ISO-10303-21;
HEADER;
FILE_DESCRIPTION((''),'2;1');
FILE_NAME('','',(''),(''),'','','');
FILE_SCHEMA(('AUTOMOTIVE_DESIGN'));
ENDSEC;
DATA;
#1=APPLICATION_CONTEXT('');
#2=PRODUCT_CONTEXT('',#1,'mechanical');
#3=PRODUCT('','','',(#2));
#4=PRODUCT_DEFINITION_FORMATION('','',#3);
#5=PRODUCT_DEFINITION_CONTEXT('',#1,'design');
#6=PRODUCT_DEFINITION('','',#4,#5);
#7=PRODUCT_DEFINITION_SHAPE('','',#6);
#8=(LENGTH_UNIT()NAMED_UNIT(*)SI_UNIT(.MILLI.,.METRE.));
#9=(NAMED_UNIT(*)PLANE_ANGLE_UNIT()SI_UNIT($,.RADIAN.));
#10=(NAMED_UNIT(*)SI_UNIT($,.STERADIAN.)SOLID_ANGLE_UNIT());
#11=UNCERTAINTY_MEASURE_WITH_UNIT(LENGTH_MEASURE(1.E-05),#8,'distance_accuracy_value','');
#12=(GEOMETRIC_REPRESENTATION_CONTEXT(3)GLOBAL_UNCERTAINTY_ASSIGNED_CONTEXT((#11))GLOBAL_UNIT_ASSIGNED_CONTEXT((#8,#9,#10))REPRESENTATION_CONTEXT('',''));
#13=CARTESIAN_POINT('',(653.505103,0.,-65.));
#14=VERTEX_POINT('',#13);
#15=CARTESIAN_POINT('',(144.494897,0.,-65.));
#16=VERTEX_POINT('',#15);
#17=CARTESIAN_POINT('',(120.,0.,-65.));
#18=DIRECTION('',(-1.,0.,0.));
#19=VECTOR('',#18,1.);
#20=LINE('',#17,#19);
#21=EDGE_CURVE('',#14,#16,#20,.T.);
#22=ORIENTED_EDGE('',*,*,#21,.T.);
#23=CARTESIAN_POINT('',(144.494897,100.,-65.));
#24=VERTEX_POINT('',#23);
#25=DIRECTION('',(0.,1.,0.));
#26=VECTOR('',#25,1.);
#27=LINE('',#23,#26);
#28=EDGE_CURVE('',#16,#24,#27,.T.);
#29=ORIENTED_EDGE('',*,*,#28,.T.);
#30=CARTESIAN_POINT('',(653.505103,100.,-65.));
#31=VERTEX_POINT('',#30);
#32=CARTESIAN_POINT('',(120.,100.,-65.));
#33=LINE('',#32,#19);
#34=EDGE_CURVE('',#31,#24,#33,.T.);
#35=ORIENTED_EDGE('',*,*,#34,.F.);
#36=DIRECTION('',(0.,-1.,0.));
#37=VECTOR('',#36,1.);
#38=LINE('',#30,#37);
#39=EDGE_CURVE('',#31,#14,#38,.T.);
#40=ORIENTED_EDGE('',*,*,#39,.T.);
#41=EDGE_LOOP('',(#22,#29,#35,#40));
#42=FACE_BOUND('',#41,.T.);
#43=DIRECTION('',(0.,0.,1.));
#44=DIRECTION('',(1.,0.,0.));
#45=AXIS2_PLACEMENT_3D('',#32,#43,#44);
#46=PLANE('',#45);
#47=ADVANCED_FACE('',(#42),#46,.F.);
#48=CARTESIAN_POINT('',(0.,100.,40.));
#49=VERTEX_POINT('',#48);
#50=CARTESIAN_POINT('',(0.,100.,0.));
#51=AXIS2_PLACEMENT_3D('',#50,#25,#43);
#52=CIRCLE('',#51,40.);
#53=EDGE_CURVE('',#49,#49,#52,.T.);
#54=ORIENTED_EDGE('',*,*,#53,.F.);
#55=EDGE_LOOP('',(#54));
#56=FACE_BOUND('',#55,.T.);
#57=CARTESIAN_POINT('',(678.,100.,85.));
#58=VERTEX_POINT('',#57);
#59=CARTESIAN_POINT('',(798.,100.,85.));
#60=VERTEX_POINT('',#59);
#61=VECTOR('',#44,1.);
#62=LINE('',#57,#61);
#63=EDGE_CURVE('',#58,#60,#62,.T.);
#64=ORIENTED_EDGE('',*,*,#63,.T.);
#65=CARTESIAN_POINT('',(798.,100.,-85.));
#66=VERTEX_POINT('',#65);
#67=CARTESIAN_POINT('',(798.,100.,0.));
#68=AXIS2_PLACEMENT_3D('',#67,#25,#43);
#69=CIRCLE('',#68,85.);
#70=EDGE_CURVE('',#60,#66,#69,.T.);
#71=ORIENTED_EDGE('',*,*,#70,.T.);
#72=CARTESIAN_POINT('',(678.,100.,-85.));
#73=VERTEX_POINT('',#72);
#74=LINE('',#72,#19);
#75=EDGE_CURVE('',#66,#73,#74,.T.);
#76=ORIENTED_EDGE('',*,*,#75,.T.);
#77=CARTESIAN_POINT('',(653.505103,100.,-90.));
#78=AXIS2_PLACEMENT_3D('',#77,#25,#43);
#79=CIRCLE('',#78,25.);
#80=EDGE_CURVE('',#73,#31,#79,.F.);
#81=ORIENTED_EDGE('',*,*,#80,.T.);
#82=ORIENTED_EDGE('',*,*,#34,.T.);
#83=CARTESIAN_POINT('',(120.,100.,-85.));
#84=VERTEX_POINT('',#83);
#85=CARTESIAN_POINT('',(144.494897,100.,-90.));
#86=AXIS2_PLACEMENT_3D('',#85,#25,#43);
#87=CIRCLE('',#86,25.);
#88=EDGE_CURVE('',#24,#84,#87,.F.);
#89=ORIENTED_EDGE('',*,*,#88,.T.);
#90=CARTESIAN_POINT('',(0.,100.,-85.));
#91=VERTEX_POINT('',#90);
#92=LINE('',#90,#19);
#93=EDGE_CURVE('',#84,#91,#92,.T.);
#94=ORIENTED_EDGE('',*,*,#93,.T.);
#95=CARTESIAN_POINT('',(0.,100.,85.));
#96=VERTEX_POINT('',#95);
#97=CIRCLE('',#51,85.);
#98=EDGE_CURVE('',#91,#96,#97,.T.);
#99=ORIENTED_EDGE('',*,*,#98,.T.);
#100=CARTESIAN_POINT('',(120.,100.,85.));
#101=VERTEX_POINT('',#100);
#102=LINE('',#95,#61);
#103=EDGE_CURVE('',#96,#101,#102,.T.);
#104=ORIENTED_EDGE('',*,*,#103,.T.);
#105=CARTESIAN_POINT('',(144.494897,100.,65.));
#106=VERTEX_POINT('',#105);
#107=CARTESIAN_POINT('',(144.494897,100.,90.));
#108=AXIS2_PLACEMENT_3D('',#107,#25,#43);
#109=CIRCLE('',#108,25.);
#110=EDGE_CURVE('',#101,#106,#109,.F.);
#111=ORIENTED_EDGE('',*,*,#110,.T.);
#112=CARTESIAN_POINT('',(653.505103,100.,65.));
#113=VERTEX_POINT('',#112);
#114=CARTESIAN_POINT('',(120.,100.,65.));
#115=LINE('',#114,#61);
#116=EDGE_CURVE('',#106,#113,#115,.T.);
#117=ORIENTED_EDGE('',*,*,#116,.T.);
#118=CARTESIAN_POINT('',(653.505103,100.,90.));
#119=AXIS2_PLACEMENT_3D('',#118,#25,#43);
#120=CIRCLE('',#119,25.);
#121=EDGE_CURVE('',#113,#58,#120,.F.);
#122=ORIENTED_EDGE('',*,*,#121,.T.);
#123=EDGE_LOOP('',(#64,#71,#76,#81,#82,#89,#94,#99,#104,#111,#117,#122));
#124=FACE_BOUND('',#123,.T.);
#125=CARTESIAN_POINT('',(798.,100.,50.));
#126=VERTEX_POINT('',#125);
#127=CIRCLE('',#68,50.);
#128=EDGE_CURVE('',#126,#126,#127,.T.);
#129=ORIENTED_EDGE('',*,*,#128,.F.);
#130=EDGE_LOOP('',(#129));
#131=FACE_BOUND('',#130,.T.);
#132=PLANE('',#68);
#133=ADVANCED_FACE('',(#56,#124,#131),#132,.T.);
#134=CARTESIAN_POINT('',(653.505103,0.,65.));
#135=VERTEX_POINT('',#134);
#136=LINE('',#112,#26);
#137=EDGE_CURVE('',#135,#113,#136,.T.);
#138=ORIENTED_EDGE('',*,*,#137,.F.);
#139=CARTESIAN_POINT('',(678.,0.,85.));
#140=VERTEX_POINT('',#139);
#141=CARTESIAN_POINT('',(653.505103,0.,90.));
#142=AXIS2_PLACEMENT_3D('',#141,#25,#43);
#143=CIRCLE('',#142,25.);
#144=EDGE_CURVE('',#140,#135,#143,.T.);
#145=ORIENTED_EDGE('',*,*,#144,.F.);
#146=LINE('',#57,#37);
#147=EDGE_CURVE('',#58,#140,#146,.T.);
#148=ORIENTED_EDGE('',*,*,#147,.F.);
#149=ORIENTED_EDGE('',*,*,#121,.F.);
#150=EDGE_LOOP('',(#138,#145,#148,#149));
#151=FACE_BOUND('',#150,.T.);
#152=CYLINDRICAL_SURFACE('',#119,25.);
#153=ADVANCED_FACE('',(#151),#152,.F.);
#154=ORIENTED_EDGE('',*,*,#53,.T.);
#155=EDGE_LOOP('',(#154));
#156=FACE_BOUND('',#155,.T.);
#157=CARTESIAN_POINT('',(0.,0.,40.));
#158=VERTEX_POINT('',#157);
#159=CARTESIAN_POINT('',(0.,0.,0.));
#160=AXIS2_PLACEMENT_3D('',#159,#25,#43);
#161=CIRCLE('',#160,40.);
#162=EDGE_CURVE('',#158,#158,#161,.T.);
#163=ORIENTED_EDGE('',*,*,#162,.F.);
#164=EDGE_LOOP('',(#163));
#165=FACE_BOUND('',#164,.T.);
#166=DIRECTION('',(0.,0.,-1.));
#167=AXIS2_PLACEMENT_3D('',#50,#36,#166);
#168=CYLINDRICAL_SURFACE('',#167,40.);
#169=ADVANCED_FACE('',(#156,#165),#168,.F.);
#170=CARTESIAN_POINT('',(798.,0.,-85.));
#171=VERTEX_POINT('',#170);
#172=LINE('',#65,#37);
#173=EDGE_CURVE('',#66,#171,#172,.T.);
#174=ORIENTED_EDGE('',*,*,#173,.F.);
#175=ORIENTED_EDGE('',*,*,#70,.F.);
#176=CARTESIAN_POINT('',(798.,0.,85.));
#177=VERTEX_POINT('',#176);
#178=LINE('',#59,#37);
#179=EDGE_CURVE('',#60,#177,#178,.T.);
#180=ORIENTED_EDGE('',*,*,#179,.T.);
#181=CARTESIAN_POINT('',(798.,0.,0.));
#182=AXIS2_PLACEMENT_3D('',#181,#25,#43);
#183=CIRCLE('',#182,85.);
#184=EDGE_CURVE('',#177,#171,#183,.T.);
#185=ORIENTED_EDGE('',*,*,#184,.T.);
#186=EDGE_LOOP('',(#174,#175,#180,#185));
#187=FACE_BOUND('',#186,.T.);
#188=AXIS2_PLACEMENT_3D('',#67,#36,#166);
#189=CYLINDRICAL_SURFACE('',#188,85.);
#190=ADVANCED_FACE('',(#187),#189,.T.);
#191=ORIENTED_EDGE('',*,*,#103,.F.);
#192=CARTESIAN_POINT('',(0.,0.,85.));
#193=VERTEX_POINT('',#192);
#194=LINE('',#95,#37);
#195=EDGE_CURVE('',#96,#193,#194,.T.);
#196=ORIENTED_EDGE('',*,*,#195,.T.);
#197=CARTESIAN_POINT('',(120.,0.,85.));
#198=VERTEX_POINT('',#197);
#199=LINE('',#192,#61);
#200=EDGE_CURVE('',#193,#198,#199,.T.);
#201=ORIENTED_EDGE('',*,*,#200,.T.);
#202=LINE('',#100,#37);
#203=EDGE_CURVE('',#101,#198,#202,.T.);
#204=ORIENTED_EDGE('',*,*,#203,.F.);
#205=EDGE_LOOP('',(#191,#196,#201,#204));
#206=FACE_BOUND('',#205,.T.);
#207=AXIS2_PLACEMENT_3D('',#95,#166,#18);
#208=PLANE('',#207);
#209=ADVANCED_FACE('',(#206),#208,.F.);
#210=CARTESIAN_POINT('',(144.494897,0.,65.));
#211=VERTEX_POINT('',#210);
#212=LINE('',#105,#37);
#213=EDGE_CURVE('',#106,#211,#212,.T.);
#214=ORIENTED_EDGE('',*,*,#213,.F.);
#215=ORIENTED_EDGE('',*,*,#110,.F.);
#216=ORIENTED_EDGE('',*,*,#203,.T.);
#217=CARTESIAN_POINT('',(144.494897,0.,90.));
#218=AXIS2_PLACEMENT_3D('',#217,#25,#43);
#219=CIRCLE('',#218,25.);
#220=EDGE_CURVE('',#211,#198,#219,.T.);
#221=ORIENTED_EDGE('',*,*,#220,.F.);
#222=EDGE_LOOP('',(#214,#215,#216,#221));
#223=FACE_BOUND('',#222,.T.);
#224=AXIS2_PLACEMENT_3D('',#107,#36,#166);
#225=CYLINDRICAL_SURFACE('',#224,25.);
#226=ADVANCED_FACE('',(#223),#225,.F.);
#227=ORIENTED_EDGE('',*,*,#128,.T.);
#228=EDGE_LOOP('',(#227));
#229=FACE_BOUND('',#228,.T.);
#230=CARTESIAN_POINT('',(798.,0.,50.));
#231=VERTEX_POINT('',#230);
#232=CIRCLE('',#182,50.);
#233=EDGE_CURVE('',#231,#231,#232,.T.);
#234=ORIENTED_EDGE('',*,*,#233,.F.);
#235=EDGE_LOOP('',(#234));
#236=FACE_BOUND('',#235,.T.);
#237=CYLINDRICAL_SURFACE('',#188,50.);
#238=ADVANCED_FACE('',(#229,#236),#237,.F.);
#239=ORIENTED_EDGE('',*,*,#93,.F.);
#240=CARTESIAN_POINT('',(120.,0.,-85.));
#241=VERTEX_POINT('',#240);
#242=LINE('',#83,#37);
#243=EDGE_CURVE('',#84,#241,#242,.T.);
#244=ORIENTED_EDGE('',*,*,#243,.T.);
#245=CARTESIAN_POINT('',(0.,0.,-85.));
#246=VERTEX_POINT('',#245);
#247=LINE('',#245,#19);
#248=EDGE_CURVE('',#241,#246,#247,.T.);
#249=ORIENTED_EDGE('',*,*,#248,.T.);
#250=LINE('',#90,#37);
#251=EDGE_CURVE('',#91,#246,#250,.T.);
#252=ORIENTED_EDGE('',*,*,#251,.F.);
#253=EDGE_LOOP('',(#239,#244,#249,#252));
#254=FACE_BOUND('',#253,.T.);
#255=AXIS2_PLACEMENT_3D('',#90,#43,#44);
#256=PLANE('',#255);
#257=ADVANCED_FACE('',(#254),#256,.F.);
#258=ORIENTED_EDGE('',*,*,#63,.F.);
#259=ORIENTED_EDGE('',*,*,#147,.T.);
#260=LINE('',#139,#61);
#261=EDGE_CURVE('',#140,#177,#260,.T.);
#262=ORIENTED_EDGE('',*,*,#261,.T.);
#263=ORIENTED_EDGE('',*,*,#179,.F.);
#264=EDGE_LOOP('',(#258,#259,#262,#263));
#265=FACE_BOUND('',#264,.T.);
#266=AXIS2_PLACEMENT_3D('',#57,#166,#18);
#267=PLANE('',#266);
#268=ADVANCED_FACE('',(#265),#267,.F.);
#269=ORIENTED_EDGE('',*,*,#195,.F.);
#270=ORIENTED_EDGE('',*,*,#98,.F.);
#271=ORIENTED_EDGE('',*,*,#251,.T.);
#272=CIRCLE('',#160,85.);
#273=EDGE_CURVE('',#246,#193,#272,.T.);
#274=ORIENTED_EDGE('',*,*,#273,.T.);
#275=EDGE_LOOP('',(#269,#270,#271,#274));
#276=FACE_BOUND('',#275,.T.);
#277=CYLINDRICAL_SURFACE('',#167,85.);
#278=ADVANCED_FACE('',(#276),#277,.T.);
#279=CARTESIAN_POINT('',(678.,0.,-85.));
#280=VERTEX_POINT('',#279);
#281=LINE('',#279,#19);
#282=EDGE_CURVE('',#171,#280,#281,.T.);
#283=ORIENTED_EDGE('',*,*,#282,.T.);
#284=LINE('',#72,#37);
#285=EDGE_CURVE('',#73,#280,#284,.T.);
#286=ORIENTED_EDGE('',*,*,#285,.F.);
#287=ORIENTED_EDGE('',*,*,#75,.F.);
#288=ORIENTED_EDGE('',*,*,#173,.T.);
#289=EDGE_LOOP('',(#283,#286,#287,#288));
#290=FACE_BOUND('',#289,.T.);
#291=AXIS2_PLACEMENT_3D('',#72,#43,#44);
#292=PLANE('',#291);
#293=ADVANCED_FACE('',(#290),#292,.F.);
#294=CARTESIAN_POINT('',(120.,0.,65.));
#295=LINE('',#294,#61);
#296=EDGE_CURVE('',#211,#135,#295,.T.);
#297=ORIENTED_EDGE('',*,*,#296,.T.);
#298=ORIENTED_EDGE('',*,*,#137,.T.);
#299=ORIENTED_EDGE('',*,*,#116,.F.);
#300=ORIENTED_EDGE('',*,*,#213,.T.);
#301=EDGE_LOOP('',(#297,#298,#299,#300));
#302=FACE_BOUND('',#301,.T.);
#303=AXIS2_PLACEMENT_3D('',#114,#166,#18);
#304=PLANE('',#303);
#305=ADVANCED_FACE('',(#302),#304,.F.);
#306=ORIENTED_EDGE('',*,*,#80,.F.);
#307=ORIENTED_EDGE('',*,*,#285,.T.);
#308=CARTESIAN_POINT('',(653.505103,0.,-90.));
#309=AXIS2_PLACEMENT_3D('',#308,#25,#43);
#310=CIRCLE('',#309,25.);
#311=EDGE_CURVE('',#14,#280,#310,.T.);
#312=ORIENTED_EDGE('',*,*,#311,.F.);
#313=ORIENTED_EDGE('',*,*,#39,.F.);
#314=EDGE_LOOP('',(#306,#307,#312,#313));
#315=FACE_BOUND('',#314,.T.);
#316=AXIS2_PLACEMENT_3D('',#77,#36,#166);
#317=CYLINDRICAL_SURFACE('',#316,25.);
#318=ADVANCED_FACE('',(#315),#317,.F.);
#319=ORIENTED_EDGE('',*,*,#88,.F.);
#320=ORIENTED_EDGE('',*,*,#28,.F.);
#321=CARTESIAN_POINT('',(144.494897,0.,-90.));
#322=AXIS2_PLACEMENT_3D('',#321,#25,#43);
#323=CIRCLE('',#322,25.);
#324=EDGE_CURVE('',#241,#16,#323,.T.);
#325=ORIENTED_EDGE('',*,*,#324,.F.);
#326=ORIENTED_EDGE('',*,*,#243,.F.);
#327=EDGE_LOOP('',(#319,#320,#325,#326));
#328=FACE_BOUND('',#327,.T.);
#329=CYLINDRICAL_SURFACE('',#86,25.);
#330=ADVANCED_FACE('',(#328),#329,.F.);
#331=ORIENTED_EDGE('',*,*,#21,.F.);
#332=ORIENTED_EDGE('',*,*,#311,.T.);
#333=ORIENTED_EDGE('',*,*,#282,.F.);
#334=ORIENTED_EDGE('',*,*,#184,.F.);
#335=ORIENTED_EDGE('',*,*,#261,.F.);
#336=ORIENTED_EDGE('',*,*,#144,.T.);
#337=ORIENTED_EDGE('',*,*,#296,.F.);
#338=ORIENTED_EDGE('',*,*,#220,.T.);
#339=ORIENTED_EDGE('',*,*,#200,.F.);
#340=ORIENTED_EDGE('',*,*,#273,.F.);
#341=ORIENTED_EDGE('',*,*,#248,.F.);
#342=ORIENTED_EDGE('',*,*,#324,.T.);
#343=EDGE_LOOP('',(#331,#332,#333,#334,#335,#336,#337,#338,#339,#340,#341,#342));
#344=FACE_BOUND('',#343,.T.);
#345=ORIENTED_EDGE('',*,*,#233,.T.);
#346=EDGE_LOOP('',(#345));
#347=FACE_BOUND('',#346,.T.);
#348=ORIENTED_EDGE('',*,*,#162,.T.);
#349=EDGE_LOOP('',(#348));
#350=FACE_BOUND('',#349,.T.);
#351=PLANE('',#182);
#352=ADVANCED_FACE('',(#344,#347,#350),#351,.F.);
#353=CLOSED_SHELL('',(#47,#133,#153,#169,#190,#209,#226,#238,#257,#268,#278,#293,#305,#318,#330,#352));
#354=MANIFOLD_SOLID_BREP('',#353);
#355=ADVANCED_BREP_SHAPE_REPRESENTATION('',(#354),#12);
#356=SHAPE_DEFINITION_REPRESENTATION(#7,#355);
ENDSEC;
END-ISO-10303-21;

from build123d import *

# Parameters (mm, degrees)
SKETCH1_R           = 50
SKETCH1_R_2         = 40
BOSS_EXTRUDE1_DEPTH = 100
FILLET1_R           = 25


with BuildPart() as part:
    # Sketch1 → Boss-Extrude1 (new body)
    with BuildSketch(Plane(origin=(0, 0, 0), x_dir=(1, 0, 0), z_dir=(0, 1, 0))):
        with BuildLine():
            Line((120, 85), (120, 65))
            Line((120, 65), (678, 65))
            Line((678, 65), (678, 85))
            Line((678, 85), (798, 85))
            ThreePointArc((798, 85), (883, 0), (798, -85))
            Line((798, -85), (678, -85))
            Line((678, -85), (678, -65))
            Line((678, -65), (120, -65))
            Line((120, -65), (120, -85))
            Line((120, -85), (0, -85))
            ThreePointArc((0, -85), (-85, 0), (0, 85))
            Line((0, 85), (120, 85))
        make_face()
        with Locations(Location((798, 0, 0), (0, 0, 270))):
            Circle(SKETCH1_R, mode=Mode.SUBTRACT)
        with Locations(Location((0, 0, 0), (0, 0, 270))):
            Circle(SKETCH1_R_2, mode=Mode.SUBTRACT)
    extrude(amount=BOSS_EXTRUDE1_DEPTH)

    # Fillet1
    # the kernel refuses this fillet: 25 mm, written as the material it adds along each edge
    with BuildSketch(Plane(origin=(120, 0, 65), x_dir=(1, 0, 0), z_dir=(0, 1, 0)), Plane(origin=(678, 0, -65), x_dir=(-1, 0, 0), z_dir=(0, 1, 0))) as fillet1_piece_1:
        with BuildLine():
            CenterArc((24.494897428, -25), FILLET1_R, 90, 78.463040967)
            Line((0, -20), (-0.489897949, -19.9))
            ThreePointArc((-0.489897949, -19.9), (-0.5, -10), (-0.5, 0))
            Line((-0.5, 0), (0, 0.5))
            Line((0, 0.5), (24.494897428, 0.5))
            Line((24.494897428, 0.5), (24.494897428, 0))
        make_face()
    extrude(amount=100)
    with BuildSketch(Plane(origin=(678, 0, 65), x_dir=(0, 0, 1), z_dir=(0, 1, 0)), Plane(origin=(120, 0, -65), x_dir=(0, 0, -1), z_dir=(0, 1, 0))) as fillet1_piece_2:
        with BuildLine():
            CenterArc((25, -24.494897428), FILLET1_R, 101.536959033, 78.463040967)
            Line((0, -24.494897428), (-0.5, -24.494897428))
            Line((-0.5, -24.494897428), (-0.5, 0))
            Line((-0.5, 0), (0, 0.5))
            ThreePointArc((0, 0.5), (10, 0.5), (19.9, 0.489897949))
            Line((19.9, 0.489897949), (20, 0))
        make_face()
    extrude(amount=100)


solid = part.part
